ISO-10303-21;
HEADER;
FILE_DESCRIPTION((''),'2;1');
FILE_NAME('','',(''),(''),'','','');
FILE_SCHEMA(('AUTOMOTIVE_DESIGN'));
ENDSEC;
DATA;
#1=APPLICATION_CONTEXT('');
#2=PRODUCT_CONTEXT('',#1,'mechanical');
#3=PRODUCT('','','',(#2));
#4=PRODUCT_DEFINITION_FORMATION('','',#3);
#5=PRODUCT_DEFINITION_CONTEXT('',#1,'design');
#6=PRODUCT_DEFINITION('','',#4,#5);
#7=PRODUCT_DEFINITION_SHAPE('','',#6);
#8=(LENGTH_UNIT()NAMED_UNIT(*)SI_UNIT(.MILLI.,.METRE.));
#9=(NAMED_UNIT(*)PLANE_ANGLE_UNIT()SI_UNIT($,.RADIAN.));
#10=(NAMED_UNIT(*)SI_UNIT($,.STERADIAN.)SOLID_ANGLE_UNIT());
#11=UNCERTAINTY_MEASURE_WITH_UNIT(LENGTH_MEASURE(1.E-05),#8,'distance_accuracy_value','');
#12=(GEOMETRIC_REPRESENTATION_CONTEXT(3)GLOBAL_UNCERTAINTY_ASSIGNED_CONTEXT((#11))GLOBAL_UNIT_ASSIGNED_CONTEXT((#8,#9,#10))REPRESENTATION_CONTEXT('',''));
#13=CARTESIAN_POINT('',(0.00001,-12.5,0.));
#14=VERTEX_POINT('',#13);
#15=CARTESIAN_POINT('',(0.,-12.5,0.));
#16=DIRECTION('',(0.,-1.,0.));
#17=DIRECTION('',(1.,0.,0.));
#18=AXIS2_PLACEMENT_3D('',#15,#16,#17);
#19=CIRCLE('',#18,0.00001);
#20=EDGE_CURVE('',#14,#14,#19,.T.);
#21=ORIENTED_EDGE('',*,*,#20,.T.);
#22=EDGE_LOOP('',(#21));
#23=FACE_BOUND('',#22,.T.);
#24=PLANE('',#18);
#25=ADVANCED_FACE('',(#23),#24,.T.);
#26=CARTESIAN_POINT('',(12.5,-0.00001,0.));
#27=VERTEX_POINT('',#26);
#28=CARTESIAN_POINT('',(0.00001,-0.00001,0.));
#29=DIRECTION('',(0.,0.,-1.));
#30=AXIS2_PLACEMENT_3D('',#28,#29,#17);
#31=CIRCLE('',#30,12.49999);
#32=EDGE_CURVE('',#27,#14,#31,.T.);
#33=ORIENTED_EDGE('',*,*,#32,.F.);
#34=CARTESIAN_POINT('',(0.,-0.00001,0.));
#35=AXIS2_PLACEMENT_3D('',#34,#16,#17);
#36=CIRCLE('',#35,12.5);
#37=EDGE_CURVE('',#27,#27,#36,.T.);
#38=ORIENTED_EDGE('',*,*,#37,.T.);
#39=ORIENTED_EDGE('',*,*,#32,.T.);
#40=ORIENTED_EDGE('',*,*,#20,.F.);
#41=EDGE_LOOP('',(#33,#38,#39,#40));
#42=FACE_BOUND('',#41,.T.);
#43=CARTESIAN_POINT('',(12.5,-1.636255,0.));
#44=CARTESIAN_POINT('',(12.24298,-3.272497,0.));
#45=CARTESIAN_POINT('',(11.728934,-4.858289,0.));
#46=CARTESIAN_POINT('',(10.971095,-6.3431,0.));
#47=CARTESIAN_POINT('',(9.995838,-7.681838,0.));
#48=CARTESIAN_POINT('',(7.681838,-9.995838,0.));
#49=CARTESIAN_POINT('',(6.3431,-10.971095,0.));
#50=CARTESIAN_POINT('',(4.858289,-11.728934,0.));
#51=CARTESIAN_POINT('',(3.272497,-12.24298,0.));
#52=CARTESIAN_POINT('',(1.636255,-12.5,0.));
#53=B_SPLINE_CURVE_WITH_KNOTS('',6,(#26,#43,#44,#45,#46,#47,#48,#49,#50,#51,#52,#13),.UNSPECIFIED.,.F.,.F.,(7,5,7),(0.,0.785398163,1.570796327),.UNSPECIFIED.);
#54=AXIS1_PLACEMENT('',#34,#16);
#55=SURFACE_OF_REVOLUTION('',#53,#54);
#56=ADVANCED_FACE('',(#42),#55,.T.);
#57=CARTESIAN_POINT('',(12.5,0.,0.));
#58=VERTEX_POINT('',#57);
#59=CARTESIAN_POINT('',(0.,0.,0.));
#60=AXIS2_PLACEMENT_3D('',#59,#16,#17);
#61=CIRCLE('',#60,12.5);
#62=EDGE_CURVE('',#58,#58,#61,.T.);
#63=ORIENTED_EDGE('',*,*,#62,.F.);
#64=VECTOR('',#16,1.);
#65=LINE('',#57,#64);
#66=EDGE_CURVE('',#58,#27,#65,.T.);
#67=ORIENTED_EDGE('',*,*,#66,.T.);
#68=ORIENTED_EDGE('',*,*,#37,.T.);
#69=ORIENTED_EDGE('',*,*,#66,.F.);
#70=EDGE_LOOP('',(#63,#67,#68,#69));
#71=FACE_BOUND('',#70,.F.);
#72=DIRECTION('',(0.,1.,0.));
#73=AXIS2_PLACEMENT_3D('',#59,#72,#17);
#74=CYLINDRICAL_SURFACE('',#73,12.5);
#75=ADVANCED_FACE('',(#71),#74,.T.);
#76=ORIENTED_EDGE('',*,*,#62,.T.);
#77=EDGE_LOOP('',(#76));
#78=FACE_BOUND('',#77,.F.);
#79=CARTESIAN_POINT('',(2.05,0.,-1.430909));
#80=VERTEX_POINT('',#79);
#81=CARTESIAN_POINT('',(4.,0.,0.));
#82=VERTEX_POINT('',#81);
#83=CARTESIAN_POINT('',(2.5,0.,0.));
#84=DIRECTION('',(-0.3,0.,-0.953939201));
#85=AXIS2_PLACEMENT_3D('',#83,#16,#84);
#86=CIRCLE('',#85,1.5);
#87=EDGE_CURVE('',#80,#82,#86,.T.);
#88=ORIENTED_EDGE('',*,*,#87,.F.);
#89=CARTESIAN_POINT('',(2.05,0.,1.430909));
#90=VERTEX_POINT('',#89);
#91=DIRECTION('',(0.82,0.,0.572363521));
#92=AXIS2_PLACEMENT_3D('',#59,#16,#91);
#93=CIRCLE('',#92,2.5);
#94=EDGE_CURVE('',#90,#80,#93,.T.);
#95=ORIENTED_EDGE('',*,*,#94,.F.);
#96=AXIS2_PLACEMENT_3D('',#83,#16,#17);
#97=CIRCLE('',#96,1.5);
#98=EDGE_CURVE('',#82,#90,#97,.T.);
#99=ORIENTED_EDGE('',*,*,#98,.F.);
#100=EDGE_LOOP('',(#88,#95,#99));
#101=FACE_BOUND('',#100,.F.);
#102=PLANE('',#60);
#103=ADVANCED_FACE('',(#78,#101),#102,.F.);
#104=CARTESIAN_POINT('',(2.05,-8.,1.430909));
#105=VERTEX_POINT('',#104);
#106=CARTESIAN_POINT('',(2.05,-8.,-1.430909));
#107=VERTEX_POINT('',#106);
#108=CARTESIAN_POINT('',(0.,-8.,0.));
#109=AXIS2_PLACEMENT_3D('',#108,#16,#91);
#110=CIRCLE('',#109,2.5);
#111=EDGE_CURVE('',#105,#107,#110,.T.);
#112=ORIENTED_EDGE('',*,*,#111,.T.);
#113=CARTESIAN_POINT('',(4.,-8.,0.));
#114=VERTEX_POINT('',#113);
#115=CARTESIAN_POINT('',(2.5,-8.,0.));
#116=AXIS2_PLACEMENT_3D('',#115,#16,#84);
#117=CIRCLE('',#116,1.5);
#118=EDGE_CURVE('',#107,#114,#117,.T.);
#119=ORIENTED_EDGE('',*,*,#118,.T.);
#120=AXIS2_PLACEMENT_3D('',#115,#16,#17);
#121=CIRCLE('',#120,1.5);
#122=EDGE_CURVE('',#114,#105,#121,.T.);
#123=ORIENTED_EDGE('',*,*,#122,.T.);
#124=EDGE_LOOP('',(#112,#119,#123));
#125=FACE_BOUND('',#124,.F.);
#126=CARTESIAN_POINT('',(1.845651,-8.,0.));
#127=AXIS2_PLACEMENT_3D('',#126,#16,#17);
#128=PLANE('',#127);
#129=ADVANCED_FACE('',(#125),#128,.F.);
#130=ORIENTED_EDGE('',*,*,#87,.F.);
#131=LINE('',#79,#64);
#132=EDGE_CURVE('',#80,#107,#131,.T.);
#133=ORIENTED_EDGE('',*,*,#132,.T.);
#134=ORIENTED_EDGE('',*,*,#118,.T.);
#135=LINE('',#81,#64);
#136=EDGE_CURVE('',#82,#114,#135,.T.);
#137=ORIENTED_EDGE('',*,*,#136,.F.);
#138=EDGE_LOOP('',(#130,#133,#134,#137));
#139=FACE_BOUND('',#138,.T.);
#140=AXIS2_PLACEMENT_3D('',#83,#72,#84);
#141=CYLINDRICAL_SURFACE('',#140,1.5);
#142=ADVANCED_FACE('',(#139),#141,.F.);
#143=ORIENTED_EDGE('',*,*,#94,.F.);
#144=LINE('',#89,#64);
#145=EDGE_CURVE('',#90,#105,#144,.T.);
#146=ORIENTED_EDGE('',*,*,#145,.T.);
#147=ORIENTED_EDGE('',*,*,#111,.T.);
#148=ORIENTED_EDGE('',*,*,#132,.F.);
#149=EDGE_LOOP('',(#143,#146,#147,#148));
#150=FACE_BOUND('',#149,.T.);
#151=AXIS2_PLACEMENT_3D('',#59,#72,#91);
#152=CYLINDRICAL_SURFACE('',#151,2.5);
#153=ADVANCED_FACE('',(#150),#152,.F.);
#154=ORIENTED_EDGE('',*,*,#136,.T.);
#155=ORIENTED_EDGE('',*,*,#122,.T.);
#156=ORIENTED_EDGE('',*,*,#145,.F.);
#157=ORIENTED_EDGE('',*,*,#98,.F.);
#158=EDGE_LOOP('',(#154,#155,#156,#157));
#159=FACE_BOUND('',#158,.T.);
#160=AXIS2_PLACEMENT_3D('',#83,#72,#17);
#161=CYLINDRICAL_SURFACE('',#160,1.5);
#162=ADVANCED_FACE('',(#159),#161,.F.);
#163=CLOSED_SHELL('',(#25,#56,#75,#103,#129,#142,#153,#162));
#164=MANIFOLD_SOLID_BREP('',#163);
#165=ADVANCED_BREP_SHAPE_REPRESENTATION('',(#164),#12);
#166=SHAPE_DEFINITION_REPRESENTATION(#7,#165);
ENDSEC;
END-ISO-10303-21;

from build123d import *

# Parameters (mm, degrees)
F1_DEPTH = 8
F0_R     = 12.5
F2_R     = 12.5
F3_DEPTH = 12.5
F4_R     = 12.49999
F7_DEPTH = 8


# Not quite as in the source:
# - a fillet or chamfer is up to 0.001 mm smaller than in the source, because OpenCascade refuses the exact size


with BuildPart() as f1:
    # F0 (on Front) → F1 (new body)
    with BuildSketch(Plane.XZ):
        with BuildLine():
            ThreePointArc((0.1338848412, 2.0937357457), (0.1198892217, 2.2981641713), (0.0781635329, 2.4987777937))
            ThreePointArc((0.0781635329, 2.4987777937), (-1.3661151588, 2.0937357457), (-2.3185923934, 0.9349488293))
            ThreePointArc((-2.3185923934, 0.9349488293), (-0.7253015556, 0.7375064414), (0.1338848412, 2.0937357457))
        make_face()
    extrude(amount=F1_DEPTH)


with BuildPart() as f1b:
    # F0 (on Front) → F1, piece 2 (new body)
    with BuildSketch(Plane.XZ):
        Circle(F0_R)
        with BuildLine():
            ThreePointArc((0.0781635329, 2.4987777937), (1.7951892424, 1.7399125219), (2.5, 0))
            ThreePointArc((2.5, 0), (-0.4761927218, -2.4542291033), (-2.3185923934, 0.9349488293))
            ThreePointArc((-2.3185923934, 0.9349488293), (-2.1857842541, 3.3499771931), (0.0781635329, 2.4987777937))
        make_face(mode=Mode.SUBTRACT)
    extrude(amount=F1_DEPTH)


with BuildPart() as f3:
    # F2 (on Front) → F3 (new body)
    with BuildSketch(Plane.XZ):
        Circle(F2_R)
    extrude(amount=F3_DEPTH)

    # F4 (radius 12.5 in the source; OpenCascade refuses exactly that, so slightly less here)
    f4_edges = [f3.edges().sort_by_distance(p)[0] for p in [
        (-12.5, -12.5, 0),
    ]]
    fillet(f4_edges, radius=F4_R)

    # F6 (on Front) → F7 (cut)
    with BuildSketch(Plane.XZ):
        with BuildLine():
            ThreePointArc((2.05, -1.4309088021), (2.3848480035, -0.75), (2.5, 0))
            ThreePointArc((2.5, 0), (2.3848480035, 0.75), (2.05, 1.4309088021))
            ThreePointArc((2.05, 1.4309088021), (1, 0), (2.05, -1.4309088021))
        make_face()
        with BuildLine():
            ThreePointArc((2.05, 1.4309088021), (2.3848480035, 0.75), (2.5, 0))
            ThreePointArc((2.5, 0), (2.3848480035, -0.75), (2.05, -1.4309088021))
            ThreePointArc((2.05, -1.4309088021), (3.3874119675, -1.2093386622), (4, 0))
            ThreePointArc((4, 0), (3.3874119675, 1.2093386622), (2.05, 1.4309088021))
        make_face()
        with BuildLine():
            ThreePointArc((2.05, -1.4309088021), (1, 0), (2.05, 1.4309088021))
            ThreePointArc((2.05, 1.4309088021), (-2.5, 0), (2.05, -1.4309088021))
        make_face()
    extrude(amount=F7_DEPTH, mode=Mode.SUBTRACT)


solid = f3.part
